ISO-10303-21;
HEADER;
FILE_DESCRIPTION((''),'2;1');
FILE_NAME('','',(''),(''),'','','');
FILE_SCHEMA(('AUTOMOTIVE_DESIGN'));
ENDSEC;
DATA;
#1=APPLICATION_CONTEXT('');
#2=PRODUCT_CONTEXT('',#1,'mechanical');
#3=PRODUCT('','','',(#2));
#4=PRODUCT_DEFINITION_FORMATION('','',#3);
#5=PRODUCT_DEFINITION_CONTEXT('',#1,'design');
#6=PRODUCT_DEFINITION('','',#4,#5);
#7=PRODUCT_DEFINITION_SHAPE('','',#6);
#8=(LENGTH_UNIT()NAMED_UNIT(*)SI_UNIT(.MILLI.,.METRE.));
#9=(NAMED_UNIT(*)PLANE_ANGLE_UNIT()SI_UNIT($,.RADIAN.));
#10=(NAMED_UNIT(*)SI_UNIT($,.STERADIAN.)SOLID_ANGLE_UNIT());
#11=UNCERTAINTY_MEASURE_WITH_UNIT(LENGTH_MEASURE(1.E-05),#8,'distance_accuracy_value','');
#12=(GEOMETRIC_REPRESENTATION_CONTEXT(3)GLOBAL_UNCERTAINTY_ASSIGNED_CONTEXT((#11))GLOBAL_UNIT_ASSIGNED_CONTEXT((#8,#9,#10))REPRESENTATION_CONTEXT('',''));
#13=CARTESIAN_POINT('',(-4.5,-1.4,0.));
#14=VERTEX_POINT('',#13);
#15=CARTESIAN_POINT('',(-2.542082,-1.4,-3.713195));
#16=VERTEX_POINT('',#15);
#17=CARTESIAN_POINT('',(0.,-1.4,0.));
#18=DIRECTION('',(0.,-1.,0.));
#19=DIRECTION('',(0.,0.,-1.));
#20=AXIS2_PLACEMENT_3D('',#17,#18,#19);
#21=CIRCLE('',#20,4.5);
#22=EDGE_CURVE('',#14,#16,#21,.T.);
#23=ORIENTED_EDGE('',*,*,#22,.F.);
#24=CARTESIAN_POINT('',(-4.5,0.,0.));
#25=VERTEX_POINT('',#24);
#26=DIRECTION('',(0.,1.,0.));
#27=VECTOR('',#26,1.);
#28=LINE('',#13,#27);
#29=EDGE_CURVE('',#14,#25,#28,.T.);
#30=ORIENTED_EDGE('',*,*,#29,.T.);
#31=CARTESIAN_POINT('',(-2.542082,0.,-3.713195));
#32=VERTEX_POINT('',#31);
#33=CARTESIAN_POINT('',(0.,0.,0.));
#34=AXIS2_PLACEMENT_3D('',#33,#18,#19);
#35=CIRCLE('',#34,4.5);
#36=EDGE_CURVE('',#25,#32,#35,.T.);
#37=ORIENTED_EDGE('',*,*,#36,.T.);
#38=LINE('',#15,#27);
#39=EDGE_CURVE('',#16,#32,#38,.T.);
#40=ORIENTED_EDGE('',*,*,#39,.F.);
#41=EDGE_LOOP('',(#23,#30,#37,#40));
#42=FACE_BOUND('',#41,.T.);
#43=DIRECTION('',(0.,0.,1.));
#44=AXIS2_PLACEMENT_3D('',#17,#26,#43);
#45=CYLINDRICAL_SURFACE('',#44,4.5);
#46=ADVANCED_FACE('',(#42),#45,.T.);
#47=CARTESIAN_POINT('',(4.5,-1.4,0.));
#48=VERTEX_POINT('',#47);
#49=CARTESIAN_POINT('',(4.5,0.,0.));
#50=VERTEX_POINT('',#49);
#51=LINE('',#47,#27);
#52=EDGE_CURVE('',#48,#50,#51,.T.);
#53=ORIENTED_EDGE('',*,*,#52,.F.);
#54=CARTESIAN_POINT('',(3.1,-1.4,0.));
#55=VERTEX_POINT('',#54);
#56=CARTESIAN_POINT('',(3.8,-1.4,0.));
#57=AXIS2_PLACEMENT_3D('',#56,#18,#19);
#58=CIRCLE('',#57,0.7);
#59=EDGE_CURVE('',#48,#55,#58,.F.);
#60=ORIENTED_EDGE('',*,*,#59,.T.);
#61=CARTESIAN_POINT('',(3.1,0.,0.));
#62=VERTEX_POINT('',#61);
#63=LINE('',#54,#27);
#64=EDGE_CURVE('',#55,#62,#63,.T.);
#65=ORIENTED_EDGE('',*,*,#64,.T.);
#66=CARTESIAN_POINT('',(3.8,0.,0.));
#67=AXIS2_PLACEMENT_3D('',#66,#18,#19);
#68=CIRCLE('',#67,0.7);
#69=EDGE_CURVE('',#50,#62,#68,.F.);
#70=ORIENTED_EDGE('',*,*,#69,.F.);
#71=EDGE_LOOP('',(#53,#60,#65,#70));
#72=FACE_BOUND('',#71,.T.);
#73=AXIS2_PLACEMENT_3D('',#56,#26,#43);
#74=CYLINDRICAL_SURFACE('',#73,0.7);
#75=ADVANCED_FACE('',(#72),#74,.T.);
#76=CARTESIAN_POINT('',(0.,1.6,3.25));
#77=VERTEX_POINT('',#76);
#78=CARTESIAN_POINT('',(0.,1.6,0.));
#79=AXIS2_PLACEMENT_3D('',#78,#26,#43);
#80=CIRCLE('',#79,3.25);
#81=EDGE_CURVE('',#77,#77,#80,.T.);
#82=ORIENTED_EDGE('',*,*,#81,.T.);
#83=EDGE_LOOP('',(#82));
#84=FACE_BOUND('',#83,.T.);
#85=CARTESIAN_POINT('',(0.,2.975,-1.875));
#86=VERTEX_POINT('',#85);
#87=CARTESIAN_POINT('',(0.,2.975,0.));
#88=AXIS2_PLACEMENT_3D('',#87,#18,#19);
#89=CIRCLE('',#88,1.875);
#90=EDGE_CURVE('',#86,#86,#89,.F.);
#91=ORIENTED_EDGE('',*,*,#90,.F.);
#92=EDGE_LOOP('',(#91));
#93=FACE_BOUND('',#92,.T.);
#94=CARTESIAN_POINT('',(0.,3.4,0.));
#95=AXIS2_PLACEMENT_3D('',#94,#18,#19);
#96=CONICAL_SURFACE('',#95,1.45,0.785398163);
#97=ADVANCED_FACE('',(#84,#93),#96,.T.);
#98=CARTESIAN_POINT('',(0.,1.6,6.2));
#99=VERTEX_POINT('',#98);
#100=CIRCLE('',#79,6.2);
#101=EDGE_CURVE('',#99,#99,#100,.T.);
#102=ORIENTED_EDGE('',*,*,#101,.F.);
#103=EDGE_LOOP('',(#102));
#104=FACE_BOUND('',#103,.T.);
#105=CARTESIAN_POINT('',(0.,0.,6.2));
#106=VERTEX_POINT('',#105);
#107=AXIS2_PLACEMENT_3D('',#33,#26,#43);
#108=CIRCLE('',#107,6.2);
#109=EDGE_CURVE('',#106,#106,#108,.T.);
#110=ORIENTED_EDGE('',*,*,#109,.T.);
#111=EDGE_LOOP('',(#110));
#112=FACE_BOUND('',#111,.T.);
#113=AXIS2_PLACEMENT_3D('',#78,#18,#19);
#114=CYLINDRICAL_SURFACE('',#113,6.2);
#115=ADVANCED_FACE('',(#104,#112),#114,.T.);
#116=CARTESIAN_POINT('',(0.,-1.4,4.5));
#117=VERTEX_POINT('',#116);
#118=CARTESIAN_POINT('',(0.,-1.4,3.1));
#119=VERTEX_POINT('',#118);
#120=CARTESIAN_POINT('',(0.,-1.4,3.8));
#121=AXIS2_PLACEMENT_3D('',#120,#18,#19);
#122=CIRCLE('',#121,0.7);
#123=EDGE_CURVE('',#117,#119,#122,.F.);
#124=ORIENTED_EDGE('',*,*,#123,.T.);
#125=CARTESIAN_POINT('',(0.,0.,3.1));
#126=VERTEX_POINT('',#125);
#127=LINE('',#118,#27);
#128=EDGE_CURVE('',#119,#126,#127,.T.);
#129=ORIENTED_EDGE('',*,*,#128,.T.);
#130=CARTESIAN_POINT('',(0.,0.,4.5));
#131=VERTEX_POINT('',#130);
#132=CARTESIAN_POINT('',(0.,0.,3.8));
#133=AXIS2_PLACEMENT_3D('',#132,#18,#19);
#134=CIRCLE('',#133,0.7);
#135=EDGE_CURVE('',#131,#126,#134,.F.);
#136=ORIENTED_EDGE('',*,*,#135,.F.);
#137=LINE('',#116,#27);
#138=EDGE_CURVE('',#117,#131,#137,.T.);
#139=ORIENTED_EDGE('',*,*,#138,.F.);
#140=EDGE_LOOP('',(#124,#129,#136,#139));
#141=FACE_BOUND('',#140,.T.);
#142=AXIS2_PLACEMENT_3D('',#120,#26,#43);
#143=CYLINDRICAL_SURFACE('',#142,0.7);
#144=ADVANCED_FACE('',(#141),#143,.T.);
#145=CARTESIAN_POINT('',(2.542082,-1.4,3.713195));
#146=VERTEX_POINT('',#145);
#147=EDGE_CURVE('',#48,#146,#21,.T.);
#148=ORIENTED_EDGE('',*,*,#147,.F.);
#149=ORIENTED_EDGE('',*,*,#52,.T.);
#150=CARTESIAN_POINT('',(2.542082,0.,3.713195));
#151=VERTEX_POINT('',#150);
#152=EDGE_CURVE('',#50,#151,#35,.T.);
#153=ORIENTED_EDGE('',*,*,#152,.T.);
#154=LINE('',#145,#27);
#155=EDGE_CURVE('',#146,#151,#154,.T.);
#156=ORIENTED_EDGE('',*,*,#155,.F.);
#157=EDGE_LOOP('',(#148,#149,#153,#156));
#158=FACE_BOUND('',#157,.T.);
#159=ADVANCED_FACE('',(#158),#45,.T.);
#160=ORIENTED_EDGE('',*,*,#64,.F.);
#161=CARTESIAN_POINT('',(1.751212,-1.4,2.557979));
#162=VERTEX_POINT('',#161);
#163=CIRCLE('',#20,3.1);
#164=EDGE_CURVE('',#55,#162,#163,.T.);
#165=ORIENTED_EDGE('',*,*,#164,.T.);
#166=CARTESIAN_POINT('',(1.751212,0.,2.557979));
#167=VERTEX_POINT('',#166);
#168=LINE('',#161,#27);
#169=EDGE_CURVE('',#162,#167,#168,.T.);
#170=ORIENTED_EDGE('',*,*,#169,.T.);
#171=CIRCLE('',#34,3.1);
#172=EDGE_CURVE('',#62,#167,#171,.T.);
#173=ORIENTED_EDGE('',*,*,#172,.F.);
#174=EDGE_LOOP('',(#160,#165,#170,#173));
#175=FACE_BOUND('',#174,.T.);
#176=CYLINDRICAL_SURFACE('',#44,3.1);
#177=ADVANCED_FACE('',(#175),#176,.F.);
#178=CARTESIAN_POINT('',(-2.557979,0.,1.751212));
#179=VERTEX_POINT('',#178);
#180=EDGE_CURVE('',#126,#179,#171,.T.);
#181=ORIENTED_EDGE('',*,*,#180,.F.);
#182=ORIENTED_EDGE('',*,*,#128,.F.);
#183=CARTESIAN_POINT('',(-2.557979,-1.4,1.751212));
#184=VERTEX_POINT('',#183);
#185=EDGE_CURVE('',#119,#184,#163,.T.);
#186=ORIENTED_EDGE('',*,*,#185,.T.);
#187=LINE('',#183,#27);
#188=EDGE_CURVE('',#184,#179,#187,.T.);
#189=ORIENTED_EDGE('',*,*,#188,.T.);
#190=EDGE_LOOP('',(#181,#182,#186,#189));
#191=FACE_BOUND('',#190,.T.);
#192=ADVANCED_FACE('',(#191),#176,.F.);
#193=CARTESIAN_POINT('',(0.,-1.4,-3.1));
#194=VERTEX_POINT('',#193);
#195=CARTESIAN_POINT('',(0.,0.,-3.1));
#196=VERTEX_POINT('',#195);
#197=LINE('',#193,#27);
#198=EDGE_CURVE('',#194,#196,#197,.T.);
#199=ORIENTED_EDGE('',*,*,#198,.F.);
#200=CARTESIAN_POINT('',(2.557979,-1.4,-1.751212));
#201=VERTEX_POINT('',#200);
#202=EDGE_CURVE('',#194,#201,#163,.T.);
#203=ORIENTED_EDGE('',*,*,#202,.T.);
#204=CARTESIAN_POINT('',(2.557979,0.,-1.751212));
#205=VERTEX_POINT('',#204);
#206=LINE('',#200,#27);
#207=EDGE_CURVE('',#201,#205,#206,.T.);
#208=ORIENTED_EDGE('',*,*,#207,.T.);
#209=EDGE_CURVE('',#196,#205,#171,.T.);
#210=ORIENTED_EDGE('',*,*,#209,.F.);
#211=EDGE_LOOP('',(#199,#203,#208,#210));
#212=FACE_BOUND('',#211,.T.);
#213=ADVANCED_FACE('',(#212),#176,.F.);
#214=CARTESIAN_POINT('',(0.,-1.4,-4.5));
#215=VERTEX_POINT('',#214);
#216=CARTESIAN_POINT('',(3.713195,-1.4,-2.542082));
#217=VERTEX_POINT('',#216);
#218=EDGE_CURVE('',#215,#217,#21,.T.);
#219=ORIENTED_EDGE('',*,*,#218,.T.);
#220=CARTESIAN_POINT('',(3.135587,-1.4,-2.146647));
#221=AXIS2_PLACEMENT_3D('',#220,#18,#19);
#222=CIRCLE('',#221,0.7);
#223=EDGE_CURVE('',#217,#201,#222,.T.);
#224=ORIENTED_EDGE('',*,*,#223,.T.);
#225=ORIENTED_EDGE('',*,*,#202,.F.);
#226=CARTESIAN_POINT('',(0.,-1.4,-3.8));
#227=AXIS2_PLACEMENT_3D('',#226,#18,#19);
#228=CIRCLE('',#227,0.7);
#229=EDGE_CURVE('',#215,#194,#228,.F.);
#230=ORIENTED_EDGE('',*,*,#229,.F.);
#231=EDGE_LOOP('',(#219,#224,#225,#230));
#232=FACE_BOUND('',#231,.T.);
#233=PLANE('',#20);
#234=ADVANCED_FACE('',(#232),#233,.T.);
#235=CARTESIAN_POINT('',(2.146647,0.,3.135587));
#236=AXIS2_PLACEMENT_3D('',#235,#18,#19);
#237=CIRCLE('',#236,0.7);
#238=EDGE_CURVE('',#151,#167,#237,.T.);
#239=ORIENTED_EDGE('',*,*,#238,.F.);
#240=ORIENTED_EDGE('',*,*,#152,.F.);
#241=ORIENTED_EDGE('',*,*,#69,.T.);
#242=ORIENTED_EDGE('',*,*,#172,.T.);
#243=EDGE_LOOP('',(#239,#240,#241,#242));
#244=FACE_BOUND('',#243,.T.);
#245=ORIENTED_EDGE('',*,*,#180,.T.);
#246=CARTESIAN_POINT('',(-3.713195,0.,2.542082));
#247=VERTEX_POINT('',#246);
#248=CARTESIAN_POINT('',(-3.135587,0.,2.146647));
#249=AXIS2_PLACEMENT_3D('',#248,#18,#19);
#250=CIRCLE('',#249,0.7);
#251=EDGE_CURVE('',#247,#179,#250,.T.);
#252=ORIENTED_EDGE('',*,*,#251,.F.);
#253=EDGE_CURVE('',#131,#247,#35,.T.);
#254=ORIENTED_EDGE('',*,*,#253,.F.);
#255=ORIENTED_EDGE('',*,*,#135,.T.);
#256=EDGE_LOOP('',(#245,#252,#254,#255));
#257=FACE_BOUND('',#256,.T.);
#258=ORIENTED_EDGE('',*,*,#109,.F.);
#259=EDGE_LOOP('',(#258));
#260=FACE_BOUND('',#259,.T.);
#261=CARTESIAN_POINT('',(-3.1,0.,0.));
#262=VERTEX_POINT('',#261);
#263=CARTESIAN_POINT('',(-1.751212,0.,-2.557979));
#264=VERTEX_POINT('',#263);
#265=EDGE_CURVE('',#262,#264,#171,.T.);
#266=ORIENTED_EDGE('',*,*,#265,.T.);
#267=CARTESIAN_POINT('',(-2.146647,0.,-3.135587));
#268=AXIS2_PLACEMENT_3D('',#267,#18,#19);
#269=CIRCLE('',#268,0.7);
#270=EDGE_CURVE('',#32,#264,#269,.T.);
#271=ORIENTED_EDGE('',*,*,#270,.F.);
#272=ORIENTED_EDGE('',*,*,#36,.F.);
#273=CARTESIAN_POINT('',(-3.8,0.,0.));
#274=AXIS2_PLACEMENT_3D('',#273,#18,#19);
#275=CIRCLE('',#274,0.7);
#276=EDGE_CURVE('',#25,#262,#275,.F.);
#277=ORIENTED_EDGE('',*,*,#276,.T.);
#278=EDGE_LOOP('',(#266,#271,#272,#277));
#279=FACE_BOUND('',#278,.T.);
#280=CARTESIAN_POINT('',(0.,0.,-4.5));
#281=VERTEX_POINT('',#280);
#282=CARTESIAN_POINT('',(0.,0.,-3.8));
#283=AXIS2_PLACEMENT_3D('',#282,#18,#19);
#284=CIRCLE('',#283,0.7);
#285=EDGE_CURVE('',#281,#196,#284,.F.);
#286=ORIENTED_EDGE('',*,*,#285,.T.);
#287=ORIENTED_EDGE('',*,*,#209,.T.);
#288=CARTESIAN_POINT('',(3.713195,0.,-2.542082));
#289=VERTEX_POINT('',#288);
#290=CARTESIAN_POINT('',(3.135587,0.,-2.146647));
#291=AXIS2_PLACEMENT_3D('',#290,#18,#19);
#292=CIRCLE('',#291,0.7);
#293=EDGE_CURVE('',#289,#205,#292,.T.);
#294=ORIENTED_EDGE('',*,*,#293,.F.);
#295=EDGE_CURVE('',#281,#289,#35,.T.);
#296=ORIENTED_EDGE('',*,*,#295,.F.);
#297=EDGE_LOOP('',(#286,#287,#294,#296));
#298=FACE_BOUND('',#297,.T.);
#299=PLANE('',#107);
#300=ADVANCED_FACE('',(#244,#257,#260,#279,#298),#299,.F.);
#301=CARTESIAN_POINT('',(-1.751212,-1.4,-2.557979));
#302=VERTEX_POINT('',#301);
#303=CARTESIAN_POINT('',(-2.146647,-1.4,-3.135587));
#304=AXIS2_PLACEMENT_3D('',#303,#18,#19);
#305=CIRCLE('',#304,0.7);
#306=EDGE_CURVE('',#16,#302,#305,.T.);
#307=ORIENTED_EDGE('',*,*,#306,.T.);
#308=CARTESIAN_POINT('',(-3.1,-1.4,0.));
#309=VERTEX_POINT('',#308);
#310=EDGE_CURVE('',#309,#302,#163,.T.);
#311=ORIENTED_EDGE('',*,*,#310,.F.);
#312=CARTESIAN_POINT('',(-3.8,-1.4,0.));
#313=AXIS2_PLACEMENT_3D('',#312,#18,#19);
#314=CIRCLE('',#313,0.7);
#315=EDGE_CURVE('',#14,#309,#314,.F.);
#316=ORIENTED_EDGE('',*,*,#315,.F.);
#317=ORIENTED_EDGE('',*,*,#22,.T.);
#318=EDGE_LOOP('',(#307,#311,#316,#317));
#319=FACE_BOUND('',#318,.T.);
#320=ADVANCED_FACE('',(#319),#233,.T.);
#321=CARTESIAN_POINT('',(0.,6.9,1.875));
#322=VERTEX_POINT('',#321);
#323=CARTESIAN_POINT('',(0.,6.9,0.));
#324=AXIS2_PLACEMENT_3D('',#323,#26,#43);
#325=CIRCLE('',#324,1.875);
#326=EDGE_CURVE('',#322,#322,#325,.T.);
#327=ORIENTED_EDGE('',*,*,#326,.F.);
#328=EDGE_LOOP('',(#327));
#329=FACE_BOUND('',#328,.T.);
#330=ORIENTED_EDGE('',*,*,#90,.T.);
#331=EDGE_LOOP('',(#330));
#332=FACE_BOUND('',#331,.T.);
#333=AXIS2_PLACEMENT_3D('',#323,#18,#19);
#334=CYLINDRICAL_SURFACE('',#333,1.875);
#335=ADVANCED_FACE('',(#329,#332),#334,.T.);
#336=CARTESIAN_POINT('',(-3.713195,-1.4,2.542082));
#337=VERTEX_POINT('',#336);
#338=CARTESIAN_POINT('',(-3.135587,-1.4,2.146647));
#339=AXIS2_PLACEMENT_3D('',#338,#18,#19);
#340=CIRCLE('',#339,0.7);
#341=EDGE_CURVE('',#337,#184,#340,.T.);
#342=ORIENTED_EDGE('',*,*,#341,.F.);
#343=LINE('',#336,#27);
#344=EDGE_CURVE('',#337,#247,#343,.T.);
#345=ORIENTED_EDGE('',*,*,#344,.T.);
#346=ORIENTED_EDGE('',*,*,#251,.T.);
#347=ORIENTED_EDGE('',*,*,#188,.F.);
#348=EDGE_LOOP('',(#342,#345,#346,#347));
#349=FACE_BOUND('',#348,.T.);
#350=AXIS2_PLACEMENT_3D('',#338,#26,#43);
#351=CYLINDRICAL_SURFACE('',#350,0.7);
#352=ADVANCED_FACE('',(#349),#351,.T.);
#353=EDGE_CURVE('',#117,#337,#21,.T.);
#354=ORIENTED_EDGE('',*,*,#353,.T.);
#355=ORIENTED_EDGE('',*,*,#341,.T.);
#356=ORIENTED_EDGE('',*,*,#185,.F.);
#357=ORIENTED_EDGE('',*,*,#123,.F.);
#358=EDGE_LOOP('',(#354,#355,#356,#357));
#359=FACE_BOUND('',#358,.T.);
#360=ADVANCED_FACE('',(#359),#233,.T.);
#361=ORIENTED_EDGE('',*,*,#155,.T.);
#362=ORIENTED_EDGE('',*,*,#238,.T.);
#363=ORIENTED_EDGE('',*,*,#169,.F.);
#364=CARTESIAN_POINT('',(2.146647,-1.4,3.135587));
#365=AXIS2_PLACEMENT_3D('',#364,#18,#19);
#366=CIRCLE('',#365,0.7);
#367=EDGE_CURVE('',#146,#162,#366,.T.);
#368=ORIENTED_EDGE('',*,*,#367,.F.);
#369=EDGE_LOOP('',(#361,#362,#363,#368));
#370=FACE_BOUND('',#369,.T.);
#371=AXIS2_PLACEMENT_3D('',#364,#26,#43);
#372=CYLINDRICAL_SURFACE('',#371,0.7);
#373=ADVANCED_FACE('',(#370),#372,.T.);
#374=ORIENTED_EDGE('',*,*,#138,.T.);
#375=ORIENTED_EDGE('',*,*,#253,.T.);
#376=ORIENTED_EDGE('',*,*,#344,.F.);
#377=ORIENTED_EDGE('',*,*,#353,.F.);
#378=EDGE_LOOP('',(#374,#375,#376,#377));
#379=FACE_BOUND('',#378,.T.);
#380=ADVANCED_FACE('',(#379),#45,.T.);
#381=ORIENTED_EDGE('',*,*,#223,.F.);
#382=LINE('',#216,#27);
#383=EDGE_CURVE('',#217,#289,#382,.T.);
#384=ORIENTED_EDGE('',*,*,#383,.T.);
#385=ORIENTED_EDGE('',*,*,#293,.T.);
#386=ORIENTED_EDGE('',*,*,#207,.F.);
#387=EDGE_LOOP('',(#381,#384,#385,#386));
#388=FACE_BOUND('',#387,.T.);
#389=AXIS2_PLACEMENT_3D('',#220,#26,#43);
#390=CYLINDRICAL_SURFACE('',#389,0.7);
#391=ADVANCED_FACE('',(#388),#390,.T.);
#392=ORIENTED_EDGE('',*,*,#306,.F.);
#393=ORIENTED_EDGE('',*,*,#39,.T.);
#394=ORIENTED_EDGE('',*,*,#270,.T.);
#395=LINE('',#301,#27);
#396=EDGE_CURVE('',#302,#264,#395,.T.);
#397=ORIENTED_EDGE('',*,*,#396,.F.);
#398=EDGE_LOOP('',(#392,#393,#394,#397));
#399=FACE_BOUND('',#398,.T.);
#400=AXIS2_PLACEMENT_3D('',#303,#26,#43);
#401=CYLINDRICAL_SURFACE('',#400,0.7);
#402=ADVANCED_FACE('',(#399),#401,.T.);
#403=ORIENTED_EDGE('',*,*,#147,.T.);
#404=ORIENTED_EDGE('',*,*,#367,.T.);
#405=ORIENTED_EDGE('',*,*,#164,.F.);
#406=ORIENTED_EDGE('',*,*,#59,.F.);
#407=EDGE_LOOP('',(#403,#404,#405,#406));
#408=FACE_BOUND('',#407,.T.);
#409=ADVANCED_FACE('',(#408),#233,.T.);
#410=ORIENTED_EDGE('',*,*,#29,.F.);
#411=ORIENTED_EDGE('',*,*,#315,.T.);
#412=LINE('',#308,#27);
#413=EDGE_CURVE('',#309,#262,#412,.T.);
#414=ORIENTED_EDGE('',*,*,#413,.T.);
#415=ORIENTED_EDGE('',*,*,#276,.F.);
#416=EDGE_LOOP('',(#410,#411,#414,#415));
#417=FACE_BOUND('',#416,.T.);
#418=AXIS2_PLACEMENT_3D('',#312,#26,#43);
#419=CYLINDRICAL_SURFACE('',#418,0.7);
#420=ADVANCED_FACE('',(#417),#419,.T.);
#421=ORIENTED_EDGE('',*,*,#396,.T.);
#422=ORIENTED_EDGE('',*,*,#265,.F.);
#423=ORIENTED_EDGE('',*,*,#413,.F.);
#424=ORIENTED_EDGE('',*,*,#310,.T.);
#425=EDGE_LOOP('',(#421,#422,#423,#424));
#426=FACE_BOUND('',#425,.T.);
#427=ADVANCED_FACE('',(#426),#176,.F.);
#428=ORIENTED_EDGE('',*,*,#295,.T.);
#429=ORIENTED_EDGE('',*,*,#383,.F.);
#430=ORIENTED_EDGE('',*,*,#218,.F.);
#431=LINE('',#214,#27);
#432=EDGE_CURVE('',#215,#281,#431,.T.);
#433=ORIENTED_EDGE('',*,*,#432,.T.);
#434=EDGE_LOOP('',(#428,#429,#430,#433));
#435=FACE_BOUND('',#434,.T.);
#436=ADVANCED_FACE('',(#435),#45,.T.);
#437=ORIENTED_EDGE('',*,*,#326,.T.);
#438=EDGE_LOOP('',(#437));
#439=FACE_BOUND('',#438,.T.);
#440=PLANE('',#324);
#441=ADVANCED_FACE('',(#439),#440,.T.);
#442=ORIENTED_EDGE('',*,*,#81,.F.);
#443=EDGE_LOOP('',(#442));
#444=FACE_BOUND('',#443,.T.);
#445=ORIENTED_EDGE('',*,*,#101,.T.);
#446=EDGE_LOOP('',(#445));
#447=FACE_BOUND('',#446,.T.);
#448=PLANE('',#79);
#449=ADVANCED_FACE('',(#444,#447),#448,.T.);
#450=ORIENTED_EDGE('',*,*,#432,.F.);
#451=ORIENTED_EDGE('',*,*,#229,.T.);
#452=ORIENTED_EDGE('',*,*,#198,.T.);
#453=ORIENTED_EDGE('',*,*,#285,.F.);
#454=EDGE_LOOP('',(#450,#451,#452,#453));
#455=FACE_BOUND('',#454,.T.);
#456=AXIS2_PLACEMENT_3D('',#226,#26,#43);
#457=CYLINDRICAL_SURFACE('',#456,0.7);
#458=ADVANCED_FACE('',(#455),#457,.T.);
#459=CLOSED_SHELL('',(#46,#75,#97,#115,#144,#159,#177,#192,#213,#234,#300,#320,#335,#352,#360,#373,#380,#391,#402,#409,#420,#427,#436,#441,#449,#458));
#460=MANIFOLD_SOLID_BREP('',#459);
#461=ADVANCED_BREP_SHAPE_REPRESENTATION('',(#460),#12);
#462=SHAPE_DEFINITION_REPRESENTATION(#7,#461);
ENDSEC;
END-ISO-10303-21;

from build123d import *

# Parameters (mm, degrees)
ESQUISSE1_R        = 6.2
BOSS_EXTRU_1_DEPTH = 1.6
ESQUISSE2_R        = 1.875
BOSS_EXTRU_3_DEPTH = 5.3
ESQUISSE3_R        = 3.25
BOSS_EXTRU_5_DEPTH = 1.8
CHANFREIN2_SIZE    = 1.8
BOSS_EXTRU_6_DEPTH = 1.4


with BuildPart() as part:
    # Esquisse1 → Boss.-Extru.1 (new body)
    with BuildSketch(Plane(origin=(0, 0, 0), x_dir=(1, 0, 0), z_dir=(0, 1, 0))):
        with Locations(Location((0, 0, 0), (0, 0, 270))):
            Circle(ESQUISSE1_R)
    extrude(amount=BOSS_EXTRU_1_DEPTH)

    # Esquisse2 → Boss.-Extru.3 (add)
    with BuildSketch(Plane(origin=(0, 1.6, 0), x_dir=(1, 0, 0), z_dir=(0, 1, 0))):
        with Locations(Location((0, 0, 0), (0, 0, 270))):
            Circle(ESQUISSE2_R)
    extrude(amount=BOSS_EXTRU_3_DEPTH)

    # Esquisse3 → Boss.-Extru.5 (add)
    with BuildSketch(Plane(origin=(0, 1.6, 0), x_dir=(1, 0, 0), z_dir=(0, 1, 0))):
        with Locations(Location((0, 0, 0), (0, 0, 270))):
            Circle(ESQUISSE3_R)
    extrude(amount=BOSS_EXTRU_5_DEPTH)

    # Chanfrein2
    # the kernel refuses this chamfer: 1.8 mm, written as the material it takes off along each edge
    with BuildSketch(Plane(origin=(0, 3.4, 0), x_dir=(0, 0, 1), z_dir=(-1, 0, 0))) as chanfrein2_piece_1_section:
        Polygon((3.25, -CHANFREIN2_SIZE), (3.25 - CHANFREIN2_SIZE, 0), (3.25, 0), align=None)
    chanfrein2_piece_1 = revolve(axis=Axis((0, 3.4, 0), (0, 1, 0)), mode=Mode.PRIVATE)
    chanfrein2_piece_1 = split(chanfrein2_piece_1, bisect_by=Plane(origin=(0, 1.6, -2.584069467), z_dir=(0, 1, 0)), keep=Keep.TOP, mode=Mode.PRIVATE)
    chanfrein2_piece_1 = chanfrein2_piece_1 - Plane(origin=(0, 2.309069467, 0), x_dir=(0, 0, 1), z_dir=(0, -1, 0)) * Cylinder(1.875, 13, mode=Mode.PRIVATE)
    add(chanfrein2_piece_1, mode=Mode.SUBTRACT)

    # Esquisse4 → Boss.-Extru.6 (add)
    with BuildSketch(Plane.XZ):
        with BuildLine():
            ThreePointArc((0, -4.5), (2.098884425, -3.980538176), (3.71319537, -2.542081853))
            ThreePointArc((3.71319537, -2.542081853), (3.531022156, -1.569038729), (2.557979032, -1.751211943))
            ThreePointArc((2.557979032, -1.751211943), (1.44589816, -2.742148521), (0, -3.1))
            ThreePointArc((0, -3.1), (-0.7, -3.8), (0, -4.5))
        make_face()
        with BuildLine():
            ThreePointArc((3.1, 0), (3.8, -0.7), (4.5, 0))
            ThreePointArc((4.5, 0), (3.980538176, 2.098884425), (2.542081853, 3.71319537))
            ThreePointArc((2.542081853, 3.71319537), (1.569038729, 3.531022156), (1.751211943, 2.557979032))
            ThreePointArc((1.751211943, 2.557979032), (2.742148521, 1.44589816), (3.1, 0))
        make_face()
        with BuildLine():
            ThreePointArc((-4.5, 0), (-3.980538176, -2.098884425), (-2.542081853, -3.71319537))
            ThreePointArc((-2.542081853, -3.71319537), (-1.569038729, -3.531022156), (-1.751211943, -2.557979032))
            ThreePointArc((-1.751211943, -2.557979032), (-2.742148521, -1.44589816), (-3.1, 0))
            ThreePointArc((-3.1, 0), (-3.8, 0.7), (-4.5, 0))
        make_face()
        with BuildLine():
            ThreePointArc((0, 3.1), (0.7, 3.8), (0, 4.5))
            ThreePointArc((0, 4.5), (-2.098884425, 3.980538176), (-3.71319537, 2.542081853))
            ThreePointArc((-3.71319537, 2.542081853), (-3.531022156, 1.569038729), (-2.557979032, 1.751211943))
            ThreePointArc((-2.557979032, 1.751211943), (-1.44589816, 2.742148521), (0, 3.1))
        make_face()
    extrude(amount=BOSS_EXTRU_6_DEPTH)


solid = part.part
